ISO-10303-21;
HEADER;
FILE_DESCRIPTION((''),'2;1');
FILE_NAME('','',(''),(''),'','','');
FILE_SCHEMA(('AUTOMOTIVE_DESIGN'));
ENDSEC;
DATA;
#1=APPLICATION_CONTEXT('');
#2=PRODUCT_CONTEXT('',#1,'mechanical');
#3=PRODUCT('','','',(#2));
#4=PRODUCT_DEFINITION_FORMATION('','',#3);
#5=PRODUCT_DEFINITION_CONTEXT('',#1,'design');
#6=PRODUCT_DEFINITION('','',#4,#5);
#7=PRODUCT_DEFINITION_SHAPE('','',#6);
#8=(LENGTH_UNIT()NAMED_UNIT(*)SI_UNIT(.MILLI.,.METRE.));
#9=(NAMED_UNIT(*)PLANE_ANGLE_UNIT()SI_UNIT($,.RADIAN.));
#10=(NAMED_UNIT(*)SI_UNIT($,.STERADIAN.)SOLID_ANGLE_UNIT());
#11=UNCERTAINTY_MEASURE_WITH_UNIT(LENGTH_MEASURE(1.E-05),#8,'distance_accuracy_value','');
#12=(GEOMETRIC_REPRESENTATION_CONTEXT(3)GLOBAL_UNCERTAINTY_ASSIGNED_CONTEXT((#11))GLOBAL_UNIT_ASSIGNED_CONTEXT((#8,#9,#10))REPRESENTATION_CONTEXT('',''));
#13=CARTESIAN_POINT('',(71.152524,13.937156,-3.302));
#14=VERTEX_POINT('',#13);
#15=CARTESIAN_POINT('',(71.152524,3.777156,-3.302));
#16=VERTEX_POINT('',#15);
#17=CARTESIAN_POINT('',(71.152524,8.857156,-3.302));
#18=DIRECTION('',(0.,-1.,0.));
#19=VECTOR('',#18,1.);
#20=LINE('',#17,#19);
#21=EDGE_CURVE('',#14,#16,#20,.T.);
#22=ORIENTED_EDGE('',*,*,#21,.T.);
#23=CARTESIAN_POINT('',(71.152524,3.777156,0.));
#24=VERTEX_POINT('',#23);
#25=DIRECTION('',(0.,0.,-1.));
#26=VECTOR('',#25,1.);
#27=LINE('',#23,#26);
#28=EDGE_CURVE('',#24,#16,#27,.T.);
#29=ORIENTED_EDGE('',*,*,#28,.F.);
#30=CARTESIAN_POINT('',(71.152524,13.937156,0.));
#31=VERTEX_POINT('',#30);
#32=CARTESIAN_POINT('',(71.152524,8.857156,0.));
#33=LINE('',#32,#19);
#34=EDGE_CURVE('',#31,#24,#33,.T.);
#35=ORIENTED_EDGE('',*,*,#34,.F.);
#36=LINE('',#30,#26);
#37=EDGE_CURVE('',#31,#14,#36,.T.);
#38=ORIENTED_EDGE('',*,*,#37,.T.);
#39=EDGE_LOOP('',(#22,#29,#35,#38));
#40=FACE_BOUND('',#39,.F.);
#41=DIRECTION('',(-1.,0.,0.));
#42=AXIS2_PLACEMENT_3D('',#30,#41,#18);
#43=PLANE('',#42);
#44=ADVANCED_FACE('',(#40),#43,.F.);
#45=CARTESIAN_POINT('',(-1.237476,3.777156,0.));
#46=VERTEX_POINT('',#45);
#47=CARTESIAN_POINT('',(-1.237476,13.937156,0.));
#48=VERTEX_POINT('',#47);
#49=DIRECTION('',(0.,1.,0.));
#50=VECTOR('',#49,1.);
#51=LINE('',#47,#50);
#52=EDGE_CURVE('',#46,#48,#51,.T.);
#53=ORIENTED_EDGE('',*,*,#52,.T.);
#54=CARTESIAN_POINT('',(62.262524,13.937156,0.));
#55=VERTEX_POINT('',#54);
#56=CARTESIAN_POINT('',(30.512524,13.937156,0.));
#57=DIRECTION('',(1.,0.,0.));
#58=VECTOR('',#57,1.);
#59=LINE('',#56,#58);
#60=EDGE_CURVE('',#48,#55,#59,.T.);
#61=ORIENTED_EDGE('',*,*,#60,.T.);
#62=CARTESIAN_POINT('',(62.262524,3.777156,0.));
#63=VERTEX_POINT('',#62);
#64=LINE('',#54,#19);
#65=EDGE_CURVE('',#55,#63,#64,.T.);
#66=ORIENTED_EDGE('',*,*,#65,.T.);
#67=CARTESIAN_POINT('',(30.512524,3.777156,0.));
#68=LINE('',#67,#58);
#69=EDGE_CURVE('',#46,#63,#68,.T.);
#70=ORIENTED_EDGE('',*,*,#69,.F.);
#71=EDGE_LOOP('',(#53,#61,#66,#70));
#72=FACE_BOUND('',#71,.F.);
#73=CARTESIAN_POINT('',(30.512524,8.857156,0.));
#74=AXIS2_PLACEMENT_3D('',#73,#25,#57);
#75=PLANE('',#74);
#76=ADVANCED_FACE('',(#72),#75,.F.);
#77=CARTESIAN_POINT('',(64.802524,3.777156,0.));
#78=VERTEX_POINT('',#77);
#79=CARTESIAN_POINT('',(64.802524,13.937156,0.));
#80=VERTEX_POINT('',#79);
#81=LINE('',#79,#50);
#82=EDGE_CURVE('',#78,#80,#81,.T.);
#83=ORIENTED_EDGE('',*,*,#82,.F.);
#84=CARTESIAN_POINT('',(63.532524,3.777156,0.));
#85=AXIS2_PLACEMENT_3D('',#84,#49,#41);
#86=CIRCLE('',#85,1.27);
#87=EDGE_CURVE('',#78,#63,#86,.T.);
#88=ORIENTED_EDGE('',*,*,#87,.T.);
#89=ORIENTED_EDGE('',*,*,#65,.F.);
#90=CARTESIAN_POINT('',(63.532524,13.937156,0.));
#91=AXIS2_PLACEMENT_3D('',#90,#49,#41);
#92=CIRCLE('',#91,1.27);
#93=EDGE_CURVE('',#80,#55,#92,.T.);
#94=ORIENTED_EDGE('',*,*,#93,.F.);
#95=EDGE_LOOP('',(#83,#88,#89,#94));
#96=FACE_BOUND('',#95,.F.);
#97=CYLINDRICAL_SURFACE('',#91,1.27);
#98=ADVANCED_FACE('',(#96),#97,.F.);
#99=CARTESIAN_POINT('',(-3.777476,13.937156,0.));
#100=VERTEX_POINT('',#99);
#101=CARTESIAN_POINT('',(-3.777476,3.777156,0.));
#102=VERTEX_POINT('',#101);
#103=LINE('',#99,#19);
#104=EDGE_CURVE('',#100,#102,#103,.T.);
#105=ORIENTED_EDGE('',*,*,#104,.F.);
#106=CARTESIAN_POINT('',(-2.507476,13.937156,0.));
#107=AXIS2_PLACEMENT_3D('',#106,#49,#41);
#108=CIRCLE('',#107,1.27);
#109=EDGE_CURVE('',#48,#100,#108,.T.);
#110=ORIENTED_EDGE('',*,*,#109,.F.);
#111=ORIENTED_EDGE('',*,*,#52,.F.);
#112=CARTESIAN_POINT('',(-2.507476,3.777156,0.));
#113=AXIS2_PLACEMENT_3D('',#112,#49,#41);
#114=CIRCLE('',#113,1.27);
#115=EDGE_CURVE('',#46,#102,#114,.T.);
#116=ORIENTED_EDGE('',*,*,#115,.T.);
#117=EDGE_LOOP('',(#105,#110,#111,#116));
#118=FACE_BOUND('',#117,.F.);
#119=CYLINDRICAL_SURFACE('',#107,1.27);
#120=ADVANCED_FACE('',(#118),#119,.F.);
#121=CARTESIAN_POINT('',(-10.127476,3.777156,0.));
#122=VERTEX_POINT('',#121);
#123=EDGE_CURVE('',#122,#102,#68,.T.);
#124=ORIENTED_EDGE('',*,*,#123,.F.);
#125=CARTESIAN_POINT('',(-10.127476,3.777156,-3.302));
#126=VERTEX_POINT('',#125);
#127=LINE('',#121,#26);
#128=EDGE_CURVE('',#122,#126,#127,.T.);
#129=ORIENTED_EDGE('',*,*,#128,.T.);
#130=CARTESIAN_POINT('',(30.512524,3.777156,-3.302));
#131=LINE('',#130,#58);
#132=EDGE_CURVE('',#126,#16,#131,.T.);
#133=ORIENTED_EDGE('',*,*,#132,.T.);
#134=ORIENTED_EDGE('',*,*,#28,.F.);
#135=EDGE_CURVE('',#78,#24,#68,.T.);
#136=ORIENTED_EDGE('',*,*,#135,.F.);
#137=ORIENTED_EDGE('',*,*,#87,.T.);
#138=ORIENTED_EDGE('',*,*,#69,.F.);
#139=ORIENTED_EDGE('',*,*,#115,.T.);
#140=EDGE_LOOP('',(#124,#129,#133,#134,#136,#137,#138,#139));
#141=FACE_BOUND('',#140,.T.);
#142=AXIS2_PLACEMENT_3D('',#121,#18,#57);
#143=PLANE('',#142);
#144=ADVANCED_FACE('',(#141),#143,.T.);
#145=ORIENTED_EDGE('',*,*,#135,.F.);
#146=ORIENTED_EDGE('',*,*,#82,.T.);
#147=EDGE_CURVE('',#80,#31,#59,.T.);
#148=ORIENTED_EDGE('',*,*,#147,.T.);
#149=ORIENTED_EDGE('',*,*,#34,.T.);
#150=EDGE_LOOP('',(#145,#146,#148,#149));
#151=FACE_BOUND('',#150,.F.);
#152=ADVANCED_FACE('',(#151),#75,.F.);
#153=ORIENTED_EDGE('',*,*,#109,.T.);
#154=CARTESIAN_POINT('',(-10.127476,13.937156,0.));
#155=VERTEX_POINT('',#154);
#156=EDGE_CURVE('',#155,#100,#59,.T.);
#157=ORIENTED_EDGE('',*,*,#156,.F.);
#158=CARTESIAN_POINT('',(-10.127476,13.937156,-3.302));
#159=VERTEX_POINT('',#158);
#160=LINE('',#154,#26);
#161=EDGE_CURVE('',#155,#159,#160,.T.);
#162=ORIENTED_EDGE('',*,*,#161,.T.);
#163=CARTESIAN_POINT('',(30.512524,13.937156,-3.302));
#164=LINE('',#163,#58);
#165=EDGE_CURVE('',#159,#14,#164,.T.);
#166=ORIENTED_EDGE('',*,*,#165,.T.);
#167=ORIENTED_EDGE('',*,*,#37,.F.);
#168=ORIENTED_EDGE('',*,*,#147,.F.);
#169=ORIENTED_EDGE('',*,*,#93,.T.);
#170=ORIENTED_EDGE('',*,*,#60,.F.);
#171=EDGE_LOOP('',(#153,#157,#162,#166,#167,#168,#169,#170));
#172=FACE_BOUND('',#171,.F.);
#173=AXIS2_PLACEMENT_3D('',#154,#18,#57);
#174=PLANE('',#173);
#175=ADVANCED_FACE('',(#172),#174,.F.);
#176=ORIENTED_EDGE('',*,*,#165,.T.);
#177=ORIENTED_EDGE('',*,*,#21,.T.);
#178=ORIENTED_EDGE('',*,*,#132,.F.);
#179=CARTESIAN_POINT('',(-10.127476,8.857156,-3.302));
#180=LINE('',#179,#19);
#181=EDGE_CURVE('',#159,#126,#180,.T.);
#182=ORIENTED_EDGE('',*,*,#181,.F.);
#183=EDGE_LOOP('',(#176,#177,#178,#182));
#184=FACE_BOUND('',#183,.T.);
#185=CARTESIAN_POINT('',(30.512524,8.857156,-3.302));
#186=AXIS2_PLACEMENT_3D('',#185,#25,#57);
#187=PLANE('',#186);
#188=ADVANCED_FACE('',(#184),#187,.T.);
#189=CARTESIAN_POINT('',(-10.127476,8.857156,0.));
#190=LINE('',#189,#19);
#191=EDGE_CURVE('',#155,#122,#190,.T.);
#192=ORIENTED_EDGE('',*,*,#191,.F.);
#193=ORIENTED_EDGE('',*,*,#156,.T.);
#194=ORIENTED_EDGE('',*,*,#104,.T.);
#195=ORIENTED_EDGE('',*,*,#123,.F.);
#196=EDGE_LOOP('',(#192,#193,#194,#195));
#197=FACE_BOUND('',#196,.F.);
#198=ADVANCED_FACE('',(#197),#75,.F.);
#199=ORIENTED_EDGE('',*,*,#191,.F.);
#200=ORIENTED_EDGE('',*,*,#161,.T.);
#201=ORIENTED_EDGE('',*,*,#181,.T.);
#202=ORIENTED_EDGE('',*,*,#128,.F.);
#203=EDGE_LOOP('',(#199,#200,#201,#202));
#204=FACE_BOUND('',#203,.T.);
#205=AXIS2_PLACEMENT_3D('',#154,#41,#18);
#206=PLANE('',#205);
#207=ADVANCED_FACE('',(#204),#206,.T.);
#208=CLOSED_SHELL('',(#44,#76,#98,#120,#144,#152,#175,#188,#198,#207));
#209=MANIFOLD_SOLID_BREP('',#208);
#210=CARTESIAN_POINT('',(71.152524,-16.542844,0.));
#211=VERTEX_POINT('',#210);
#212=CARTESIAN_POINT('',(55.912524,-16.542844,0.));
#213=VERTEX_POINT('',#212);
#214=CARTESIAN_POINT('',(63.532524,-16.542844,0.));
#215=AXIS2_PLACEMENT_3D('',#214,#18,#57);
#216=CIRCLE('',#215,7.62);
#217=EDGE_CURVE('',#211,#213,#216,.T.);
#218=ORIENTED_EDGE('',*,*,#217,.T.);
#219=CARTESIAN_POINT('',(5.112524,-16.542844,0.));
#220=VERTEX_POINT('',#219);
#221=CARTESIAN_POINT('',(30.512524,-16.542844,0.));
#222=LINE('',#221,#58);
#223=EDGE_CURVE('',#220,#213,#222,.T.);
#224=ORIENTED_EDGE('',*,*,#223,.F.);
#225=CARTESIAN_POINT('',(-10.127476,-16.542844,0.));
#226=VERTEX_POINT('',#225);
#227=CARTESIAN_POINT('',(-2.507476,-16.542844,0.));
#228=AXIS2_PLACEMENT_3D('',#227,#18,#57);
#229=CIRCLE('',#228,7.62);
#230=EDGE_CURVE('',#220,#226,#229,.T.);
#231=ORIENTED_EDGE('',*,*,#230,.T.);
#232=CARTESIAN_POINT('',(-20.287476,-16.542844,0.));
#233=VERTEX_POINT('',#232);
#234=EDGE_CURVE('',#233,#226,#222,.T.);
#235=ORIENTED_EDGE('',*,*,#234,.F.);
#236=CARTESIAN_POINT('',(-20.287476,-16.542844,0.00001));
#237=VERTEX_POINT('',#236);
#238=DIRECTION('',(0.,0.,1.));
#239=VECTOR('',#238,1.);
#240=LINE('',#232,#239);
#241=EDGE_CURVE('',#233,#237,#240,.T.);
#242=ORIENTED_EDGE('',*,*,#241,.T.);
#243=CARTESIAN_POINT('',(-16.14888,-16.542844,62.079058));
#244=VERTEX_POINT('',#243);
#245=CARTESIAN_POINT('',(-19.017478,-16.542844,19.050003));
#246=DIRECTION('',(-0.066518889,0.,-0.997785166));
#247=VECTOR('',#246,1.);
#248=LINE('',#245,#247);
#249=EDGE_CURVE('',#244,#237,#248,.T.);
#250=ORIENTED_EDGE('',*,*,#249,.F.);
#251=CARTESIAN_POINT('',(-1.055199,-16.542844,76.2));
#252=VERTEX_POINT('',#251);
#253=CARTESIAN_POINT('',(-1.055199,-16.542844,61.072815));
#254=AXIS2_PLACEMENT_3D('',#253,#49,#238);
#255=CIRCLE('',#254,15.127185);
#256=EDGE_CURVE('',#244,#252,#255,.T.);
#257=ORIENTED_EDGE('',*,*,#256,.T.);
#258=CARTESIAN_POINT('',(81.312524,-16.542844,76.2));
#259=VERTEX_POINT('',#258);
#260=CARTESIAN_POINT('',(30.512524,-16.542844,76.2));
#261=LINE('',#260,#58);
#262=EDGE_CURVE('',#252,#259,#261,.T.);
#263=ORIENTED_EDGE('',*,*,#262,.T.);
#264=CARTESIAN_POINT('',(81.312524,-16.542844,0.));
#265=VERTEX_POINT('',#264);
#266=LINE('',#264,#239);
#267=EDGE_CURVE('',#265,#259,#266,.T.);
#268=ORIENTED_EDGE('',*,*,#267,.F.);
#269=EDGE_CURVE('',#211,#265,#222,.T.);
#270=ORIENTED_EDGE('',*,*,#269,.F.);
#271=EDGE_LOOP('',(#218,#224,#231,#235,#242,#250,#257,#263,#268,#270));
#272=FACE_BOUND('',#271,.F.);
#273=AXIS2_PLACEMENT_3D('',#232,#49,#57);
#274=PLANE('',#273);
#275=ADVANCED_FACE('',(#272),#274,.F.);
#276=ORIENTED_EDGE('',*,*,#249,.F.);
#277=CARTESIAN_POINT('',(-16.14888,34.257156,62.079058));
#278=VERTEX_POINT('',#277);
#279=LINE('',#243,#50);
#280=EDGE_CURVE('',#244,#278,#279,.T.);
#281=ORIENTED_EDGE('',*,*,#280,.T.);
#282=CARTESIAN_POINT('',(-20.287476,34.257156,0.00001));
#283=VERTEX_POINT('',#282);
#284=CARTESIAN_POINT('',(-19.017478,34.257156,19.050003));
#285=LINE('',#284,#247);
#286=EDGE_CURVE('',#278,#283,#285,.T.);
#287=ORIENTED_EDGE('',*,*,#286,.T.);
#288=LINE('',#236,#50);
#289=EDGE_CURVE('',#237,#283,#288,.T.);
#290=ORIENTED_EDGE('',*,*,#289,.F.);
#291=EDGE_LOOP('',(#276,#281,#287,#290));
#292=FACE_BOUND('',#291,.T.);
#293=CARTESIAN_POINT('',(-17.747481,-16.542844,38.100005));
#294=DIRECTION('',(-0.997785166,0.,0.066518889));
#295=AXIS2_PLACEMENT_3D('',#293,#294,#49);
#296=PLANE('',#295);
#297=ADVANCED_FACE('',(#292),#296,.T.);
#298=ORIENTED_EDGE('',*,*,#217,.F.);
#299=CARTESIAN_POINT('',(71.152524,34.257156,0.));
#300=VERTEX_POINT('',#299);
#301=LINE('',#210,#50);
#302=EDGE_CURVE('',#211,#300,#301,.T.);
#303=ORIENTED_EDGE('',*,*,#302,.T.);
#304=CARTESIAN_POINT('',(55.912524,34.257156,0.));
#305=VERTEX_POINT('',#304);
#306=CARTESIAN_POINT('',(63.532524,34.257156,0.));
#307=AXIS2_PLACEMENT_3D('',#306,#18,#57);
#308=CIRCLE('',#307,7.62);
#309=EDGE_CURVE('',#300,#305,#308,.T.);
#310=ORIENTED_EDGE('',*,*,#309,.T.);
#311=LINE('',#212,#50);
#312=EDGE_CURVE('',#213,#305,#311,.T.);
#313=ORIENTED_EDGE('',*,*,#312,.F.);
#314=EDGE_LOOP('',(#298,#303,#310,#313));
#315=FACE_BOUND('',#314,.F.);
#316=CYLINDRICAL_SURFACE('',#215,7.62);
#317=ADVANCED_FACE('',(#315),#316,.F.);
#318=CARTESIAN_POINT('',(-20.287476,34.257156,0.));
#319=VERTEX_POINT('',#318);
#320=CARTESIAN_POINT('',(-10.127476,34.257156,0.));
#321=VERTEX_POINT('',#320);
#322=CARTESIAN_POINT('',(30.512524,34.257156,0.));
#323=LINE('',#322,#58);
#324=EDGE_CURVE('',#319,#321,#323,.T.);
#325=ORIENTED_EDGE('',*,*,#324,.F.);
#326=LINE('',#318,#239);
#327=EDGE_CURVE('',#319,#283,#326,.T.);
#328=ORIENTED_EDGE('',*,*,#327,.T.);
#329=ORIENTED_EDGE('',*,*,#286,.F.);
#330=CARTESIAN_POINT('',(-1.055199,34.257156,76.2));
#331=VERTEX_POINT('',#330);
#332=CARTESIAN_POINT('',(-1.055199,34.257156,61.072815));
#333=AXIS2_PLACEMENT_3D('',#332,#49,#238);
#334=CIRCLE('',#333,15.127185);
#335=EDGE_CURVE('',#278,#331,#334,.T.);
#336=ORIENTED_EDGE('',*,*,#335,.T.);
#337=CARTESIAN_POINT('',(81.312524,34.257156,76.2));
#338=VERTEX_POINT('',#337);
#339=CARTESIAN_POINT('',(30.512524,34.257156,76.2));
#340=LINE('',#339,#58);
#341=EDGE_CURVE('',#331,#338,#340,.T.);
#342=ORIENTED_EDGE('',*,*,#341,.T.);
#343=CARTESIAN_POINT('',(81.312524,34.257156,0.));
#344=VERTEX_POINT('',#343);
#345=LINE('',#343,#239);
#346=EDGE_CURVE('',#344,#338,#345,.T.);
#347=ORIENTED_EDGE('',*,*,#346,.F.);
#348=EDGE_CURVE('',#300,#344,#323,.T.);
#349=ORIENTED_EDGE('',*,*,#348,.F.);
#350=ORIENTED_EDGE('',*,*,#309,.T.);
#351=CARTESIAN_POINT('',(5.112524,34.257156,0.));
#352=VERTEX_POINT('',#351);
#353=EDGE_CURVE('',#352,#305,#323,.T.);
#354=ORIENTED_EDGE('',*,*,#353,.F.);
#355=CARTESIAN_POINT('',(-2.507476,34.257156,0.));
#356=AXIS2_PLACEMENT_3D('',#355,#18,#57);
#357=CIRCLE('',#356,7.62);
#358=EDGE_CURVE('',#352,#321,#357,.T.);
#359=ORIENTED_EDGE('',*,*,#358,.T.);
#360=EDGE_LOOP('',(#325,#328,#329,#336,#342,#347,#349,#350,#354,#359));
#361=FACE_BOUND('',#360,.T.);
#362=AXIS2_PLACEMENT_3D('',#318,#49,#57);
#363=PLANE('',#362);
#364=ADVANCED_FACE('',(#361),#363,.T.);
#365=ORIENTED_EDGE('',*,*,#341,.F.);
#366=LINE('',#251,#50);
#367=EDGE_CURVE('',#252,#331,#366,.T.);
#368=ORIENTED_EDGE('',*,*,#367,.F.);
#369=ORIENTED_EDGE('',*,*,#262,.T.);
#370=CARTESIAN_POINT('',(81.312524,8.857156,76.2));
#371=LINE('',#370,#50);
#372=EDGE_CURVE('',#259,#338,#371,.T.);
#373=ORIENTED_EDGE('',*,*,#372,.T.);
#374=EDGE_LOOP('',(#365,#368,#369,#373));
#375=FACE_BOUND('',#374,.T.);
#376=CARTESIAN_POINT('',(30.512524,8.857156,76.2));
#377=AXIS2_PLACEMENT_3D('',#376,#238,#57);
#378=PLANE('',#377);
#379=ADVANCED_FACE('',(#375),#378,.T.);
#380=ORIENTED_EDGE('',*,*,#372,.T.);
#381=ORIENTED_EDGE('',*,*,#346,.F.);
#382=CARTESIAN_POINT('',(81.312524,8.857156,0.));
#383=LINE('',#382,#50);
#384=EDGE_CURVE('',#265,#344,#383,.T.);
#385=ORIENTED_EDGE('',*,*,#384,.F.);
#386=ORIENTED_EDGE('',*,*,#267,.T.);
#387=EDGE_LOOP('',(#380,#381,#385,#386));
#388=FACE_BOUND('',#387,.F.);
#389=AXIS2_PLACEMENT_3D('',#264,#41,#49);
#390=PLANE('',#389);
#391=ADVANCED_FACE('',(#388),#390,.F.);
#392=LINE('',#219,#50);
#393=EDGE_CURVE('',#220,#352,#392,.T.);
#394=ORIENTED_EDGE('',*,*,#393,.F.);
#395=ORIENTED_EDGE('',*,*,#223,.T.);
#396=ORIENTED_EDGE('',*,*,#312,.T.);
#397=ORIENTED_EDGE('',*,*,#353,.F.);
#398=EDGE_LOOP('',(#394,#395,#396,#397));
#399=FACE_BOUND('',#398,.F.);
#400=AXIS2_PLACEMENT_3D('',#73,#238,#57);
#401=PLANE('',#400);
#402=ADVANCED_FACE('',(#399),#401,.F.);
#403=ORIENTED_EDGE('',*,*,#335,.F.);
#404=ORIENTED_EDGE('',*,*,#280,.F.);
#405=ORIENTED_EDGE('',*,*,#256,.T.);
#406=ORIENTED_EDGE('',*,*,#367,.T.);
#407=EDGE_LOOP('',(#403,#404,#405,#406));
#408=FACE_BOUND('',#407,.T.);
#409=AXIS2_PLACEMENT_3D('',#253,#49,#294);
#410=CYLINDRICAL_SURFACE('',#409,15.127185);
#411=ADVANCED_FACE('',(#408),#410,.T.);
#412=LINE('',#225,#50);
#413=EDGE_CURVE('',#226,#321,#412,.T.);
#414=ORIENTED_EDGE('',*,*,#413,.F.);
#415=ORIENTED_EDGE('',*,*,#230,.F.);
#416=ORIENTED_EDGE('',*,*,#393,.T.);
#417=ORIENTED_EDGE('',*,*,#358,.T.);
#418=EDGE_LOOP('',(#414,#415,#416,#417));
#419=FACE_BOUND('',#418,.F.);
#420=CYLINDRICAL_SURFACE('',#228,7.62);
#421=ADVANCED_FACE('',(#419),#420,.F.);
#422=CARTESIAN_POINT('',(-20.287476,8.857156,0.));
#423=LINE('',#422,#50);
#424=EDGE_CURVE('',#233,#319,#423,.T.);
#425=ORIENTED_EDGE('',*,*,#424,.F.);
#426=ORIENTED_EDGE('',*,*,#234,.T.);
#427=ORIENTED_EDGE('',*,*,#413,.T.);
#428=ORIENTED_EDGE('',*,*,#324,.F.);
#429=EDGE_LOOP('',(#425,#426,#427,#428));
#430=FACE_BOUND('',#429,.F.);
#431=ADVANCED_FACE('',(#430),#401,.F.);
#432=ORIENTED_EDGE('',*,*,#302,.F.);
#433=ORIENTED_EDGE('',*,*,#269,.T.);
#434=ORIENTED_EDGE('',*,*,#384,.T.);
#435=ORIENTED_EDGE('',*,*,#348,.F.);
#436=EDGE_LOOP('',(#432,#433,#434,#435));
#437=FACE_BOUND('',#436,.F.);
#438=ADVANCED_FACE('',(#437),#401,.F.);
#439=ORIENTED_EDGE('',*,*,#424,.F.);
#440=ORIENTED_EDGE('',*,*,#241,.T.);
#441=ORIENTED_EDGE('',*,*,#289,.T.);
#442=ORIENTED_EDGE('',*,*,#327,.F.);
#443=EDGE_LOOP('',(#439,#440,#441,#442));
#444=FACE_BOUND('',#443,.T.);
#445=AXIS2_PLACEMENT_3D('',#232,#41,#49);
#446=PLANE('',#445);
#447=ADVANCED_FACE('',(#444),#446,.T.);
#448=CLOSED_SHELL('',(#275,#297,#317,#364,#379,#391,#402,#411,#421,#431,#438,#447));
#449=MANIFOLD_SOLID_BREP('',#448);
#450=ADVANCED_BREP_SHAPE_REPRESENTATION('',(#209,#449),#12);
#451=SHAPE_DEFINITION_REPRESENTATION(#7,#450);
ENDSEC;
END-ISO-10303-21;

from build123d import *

# Parameters (mm, degrees)
F0_W     = 101.6
F0_H     = 50.8
F1_DEPTH = 76.2
F3_DEPTH = 50.8
F4_W     = 81.28
F4_H     = 10.16
F5_DEPTH = 3.302
F6_R     = 1.27
F7_DEPTH = 10.16
F8_SIZE2 = 76.19999
F8_SIZE  = 5.07999
F9_R     = 15.1271850899


# Not quite as in the source:
# - a fillet or chamfer is up to 0.001 mm smaller than in the source, because OpenCascade refuses the exact size


with BuildPart() as f1:
    # F0 (on Top) → F1 (new body)
    with BuildSketch(Plane.XY):
        with Locations((30.5125243939, 8.8571563035)):
            Rectangle(F0_W, F0_H)
    extrude(amount=F1_DEPTH)

    # F2 (on face) → F3 (cut)
    with BuildSketch(Plane.XZ.offset(16.5428436965)):
        with BuildLine():
            Line((-2.5074756061, 0), (5.1125243939, 0))
            ThreePointArc((5.1125243939, 0), (-2.5074756061, 7.62), (-10.1274756061, 0))
            Line((-10.1274756061, 0), (-2.5074756061, 0))
        make_face()
        with BuildLine():
            Line((63.5325243939, 0), (71.1525243939, 0))
            ThreePointArc((71.1525243939, 0), (63.5325243939, 7.62), (55.9125243939, 0))
            Line((55.9125243939, 0), (63.5325243939, 0))
        make_face()
    extrude(amount=-F3_DEPTH, mode=Mode.SUBTRACT)

    # F8 (size 5.08 and 76.2 in the source; OpenCascade refuses exactly that, so slightly less here)
    f8_edges = [f1.edges().sort_by_distance(p)[0] for p in [
        (-20.287476, 8.857156, 76.2),
    ]]
    f8_side = f1.faces().sort_by_distance((30.512524, 8.857156, 76.2))[0]
    chamfer(f8_edges, length=F8_SIZE, length2=F8_SIZE2, reference=f8_side)

    # F9
    f9_edges = [f1.edges().sort_by_distance(p)[0] for p in [
        (-15.207486, 8.857156, 76.2),
    ]]
    fillet(f9_edges, radius=F9_R)


with BuildPart() as f5:
    # F4 (on face) → F5 (new body)
    with BuildSketch(Plane(origin=(0, 0, 0), x_dir=(1, 0, 0), z_dir=(0, 0, -1))):
        with Locations((30.5125243939, -8.8571563035)):
            Rectangle(F4_W, F4_H)
    extrude(amount=F5_DEPTH)

    # F6 (on face) → F7 (cut)
    with BuildSketch(Plane(origin=(0, 13.9371563035, 0), x_dir=(-1, 0, 0), z_dir=(0, 1, 0))):
        with Locations((-63.5325243939, 0)):
            Circle(F6_R)
        with Locations((2.5074756061, 0)):
            Circle(F6_R)
    extrude(amount=-F7_DEPTH, mode=Mode.SUBTRACT)


solid = Compound([f1.part, f5.part])
